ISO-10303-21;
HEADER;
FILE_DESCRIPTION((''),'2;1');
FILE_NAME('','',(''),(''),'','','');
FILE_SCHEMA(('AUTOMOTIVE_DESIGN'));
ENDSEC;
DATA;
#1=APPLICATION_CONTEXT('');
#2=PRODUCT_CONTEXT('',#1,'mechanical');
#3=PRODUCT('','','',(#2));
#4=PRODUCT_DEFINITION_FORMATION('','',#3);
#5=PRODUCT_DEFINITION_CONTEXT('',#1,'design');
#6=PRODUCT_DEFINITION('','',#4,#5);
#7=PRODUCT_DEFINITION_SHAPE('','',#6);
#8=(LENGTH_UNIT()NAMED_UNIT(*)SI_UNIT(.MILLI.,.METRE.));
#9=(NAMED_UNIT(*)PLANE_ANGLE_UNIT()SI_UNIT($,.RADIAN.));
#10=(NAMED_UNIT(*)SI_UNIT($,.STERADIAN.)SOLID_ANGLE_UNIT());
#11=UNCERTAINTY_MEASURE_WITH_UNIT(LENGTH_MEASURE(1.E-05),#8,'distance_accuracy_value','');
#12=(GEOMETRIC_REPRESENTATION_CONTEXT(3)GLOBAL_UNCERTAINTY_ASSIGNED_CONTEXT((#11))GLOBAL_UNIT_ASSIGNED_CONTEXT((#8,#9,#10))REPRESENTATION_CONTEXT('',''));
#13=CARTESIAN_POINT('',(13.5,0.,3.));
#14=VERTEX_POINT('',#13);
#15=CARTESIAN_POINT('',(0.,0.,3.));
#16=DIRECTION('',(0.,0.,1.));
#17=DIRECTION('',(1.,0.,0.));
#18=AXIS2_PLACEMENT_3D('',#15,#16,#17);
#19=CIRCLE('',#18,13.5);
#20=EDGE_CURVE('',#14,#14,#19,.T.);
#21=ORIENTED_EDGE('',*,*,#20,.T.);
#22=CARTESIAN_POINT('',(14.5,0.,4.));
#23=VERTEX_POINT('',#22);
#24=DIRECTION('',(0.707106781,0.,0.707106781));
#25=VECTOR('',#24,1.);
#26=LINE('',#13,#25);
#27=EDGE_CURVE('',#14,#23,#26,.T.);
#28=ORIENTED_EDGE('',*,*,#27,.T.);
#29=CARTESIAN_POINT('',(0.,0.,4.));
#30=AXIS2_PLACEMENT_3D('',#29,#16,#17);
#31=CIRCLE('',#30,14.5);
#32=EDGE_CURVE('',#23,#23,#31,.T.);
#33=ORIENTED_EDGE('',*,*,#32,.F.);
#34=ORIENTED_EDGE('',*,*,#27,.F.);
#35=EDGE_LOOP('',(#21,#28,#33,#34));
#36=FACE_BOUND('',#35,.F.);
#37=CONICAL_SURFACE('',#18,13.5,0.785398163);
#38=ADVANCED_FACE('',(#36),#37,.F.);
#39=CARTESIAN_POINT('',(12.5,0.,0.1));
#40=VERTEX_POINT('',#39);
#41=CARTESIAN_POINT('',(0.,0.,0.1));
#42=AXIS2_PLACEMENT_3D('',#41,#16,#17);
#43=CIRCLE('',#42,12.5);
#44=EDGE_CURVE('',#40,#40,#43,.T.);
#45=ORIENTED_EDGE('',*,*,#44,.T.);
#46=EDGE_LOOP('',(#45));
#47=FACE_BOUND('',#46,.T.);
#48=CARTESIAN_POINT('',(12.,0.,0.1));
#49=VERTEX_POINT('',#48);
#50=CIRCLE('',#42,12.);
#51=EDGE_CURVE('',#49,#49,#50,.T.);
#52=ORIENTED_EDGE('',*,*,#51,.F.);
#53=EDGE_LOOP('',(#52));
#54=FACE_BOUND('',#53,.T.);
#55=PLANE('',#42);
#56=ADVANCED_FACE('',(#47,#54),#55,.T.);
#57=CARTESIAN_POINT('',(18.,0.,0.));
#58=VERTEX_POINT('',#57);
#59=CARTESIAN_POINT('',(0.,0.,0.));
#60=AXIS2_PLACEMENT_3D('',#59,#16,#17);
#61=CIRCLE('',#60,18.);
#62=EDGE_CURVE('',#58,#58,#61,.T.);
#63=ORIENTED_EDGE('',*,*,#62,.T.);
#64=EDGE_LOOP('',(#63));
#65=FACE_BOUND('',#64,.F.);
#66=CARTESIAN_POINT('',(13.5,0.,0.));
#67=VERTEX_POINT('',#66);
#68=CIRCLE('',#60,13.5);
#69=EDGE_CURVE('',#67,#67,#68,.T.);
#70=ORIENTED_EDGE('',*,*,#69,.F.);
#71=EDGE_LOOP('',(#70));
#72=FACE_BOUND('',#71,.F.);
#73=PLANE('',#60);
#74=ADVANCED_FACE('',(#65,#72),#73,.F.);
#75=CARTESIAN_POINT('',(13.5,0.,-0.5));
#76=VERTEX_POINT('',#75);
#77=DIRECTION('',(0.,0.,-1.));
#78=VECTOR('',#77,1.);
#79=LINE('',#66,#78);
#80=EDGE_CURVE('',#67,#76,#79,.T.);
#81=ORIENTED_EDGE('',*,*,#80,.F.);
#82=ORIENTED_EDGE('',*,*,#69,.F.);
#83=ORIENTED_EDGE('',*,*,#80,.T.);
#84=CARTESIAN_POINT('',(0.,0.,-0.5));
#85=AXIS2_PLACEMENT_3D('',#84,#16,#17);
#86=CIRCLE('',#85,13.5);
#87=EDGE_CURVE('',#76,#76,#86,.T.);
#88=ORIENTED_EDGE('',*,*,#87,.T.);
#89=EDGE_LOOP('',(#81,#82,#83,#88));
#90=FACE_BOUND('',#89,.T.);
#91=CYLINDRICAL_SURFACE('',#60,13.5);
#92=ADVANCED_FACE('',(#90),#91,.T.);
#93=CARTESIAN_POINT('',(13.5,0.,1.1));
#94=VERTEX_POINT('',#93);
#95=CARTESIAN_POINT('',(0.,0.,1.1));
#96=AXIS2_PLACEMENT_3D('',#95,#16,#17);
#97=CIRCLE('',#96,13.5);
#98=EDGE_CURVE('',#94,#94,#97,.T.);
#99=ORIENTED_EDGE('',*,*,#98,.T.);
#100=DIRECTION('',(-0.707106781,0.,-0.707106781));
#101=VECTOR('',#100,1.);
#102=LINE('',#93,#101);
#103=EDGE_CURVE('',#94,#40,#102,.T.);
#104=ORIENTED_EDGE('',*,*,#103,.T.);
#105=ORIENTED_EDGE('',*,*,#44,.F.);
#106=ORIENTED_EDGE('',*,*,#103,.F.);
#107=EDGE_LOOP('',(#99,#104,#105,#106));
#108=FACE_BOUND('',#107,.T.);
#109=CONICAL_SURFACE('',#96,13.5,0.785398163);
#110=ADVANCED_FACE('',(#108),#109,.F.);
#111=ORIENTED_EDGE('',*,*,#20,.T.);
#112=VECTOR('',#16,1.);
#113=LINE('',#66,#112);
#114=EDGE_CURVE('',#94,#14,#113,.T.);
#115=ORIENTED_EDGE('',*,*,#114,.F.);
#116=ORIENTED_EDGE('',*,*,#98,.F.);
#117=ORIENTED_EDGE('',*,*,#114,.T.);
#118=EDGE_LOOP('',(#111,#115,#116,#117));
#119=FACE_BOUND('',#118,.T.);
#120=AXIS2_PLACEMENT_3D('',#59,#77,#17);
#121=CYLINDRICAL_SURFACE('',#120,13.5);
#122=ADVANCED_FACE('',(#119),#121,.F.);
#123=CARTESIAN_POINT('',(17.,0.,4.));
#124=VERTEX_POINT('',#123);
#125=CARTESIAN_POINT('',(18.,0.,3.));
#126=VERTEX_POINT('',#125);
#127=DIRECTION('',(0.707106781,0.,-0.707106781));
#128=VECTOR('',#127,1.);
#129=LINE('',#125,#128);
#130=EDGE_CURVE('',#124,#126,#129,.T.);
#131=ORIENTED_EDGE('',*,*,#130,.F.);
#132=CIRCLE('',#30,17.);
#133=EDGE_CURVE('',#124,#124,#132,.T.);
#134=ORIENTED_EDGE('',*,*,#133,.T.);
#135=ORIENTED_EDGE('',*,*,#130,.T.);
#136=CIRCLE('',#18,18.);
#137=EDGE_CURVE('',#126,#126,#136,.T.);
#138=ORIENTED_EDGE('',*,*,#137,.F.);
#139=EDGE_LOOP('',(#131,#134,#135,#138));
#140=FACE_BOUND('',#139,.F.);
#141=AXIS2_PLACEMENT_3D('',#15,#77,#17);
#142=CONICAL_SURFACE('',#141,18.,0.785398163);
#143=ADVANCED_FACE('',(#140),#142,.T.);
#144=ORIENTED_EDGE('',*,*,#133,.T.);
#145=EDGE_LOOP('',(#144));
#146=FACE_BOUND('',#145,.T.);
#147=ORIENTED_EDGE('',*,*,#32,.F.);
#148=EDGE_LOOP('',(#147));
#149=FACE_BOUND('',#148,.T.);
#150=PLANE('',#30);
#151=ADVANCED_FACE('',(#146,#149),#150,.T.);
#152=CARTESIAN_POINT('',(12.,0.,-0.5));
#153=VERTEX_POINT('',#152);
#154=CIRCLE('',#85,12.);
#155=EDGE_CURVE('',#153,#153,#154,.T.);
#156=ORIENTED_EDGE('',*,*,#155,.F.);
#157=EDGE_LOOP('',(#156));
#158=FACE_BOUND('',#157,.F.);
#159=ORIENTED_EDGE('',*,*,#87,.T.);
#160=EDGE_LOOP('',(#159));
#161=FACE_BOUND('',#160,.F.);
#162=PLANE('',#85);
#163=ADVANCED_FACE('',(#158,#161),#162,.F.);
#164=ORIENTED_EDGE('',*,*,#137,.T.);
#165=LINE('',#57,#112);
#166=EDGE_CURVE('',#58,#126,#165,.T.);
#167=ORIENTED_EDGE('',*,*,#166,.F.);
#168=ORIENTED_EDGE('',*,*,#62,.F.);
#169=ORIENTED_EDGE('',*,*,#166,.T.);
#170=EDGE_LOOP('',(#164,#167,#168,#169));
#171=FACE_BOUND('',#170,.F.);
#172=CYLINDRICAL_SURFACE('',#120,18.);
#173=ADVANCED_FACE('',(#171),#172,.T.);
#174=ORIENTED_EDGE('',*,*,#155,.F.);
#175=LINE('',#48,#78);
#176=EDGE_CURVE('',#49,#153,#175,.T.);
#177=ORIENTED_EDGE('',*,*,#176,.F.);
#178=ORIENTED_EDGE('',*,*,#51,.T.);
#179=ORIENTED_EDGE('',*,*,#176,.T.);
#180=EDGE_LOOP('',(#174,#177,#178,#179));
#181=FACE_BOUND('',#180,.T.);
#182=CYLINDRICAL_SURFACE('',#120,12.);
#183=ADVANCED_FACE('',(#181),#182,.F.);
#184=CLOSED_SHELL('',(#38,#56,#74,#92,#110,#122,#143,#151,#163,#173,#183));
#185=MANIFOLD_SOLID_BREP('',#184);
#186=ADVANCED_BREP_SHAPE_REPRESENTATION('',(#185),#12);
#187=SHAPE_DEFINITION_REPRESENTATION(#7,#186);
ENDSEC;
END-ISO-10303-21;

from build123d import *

# Parameters (mm, degrees)
F0_R          = 18
F0_R_2        = 13.5
F1_DEPTH      = 4
F0_R_3        = 12
F2_DEPTH      = 0.5
F2_DEPTH_BACK = 0.1
F3_SIZE       = 1
F4_SIZE       = 1


with BuildPart() as f1:
    # F0 (on Top) → F1 (new body)
    with BuildSketch(Plane.XY):
        Circle(F0_R)
        Circle(F0_R_2, mode=Mode.SUBTRACT)
    extrude(amount=F1_DEPTH)

    # F0 (on Top) → F2 (join, two sides)
    with BuildSketch(Plane.XY) as f2_sk:
        Circle(F0_R_2)
        Circle(F0_R_3, mode=Mode.SUBTRACT)
    extrude(amount=-F2_DEPTH)
    extrude(f2_sk.sketch, amount=F2_DEPTH_BACK)

    # F3
    f3_edges = [f1.edges().sort_by_distance(p)[0] for p in [
        (-13.5, 0, 0.1),
    ]]
    chamfer(f3_edges, length=F3_SIZE)

    # F4
    f4_edges = [f1.edges().sort_by_distance(p)[0] for p in [
        (-18, 0, 4),
        (-13.5, 0, 4),
    ]]
    chamfer(f4_edges, length=F4_SIZE)


solid = f1.part
